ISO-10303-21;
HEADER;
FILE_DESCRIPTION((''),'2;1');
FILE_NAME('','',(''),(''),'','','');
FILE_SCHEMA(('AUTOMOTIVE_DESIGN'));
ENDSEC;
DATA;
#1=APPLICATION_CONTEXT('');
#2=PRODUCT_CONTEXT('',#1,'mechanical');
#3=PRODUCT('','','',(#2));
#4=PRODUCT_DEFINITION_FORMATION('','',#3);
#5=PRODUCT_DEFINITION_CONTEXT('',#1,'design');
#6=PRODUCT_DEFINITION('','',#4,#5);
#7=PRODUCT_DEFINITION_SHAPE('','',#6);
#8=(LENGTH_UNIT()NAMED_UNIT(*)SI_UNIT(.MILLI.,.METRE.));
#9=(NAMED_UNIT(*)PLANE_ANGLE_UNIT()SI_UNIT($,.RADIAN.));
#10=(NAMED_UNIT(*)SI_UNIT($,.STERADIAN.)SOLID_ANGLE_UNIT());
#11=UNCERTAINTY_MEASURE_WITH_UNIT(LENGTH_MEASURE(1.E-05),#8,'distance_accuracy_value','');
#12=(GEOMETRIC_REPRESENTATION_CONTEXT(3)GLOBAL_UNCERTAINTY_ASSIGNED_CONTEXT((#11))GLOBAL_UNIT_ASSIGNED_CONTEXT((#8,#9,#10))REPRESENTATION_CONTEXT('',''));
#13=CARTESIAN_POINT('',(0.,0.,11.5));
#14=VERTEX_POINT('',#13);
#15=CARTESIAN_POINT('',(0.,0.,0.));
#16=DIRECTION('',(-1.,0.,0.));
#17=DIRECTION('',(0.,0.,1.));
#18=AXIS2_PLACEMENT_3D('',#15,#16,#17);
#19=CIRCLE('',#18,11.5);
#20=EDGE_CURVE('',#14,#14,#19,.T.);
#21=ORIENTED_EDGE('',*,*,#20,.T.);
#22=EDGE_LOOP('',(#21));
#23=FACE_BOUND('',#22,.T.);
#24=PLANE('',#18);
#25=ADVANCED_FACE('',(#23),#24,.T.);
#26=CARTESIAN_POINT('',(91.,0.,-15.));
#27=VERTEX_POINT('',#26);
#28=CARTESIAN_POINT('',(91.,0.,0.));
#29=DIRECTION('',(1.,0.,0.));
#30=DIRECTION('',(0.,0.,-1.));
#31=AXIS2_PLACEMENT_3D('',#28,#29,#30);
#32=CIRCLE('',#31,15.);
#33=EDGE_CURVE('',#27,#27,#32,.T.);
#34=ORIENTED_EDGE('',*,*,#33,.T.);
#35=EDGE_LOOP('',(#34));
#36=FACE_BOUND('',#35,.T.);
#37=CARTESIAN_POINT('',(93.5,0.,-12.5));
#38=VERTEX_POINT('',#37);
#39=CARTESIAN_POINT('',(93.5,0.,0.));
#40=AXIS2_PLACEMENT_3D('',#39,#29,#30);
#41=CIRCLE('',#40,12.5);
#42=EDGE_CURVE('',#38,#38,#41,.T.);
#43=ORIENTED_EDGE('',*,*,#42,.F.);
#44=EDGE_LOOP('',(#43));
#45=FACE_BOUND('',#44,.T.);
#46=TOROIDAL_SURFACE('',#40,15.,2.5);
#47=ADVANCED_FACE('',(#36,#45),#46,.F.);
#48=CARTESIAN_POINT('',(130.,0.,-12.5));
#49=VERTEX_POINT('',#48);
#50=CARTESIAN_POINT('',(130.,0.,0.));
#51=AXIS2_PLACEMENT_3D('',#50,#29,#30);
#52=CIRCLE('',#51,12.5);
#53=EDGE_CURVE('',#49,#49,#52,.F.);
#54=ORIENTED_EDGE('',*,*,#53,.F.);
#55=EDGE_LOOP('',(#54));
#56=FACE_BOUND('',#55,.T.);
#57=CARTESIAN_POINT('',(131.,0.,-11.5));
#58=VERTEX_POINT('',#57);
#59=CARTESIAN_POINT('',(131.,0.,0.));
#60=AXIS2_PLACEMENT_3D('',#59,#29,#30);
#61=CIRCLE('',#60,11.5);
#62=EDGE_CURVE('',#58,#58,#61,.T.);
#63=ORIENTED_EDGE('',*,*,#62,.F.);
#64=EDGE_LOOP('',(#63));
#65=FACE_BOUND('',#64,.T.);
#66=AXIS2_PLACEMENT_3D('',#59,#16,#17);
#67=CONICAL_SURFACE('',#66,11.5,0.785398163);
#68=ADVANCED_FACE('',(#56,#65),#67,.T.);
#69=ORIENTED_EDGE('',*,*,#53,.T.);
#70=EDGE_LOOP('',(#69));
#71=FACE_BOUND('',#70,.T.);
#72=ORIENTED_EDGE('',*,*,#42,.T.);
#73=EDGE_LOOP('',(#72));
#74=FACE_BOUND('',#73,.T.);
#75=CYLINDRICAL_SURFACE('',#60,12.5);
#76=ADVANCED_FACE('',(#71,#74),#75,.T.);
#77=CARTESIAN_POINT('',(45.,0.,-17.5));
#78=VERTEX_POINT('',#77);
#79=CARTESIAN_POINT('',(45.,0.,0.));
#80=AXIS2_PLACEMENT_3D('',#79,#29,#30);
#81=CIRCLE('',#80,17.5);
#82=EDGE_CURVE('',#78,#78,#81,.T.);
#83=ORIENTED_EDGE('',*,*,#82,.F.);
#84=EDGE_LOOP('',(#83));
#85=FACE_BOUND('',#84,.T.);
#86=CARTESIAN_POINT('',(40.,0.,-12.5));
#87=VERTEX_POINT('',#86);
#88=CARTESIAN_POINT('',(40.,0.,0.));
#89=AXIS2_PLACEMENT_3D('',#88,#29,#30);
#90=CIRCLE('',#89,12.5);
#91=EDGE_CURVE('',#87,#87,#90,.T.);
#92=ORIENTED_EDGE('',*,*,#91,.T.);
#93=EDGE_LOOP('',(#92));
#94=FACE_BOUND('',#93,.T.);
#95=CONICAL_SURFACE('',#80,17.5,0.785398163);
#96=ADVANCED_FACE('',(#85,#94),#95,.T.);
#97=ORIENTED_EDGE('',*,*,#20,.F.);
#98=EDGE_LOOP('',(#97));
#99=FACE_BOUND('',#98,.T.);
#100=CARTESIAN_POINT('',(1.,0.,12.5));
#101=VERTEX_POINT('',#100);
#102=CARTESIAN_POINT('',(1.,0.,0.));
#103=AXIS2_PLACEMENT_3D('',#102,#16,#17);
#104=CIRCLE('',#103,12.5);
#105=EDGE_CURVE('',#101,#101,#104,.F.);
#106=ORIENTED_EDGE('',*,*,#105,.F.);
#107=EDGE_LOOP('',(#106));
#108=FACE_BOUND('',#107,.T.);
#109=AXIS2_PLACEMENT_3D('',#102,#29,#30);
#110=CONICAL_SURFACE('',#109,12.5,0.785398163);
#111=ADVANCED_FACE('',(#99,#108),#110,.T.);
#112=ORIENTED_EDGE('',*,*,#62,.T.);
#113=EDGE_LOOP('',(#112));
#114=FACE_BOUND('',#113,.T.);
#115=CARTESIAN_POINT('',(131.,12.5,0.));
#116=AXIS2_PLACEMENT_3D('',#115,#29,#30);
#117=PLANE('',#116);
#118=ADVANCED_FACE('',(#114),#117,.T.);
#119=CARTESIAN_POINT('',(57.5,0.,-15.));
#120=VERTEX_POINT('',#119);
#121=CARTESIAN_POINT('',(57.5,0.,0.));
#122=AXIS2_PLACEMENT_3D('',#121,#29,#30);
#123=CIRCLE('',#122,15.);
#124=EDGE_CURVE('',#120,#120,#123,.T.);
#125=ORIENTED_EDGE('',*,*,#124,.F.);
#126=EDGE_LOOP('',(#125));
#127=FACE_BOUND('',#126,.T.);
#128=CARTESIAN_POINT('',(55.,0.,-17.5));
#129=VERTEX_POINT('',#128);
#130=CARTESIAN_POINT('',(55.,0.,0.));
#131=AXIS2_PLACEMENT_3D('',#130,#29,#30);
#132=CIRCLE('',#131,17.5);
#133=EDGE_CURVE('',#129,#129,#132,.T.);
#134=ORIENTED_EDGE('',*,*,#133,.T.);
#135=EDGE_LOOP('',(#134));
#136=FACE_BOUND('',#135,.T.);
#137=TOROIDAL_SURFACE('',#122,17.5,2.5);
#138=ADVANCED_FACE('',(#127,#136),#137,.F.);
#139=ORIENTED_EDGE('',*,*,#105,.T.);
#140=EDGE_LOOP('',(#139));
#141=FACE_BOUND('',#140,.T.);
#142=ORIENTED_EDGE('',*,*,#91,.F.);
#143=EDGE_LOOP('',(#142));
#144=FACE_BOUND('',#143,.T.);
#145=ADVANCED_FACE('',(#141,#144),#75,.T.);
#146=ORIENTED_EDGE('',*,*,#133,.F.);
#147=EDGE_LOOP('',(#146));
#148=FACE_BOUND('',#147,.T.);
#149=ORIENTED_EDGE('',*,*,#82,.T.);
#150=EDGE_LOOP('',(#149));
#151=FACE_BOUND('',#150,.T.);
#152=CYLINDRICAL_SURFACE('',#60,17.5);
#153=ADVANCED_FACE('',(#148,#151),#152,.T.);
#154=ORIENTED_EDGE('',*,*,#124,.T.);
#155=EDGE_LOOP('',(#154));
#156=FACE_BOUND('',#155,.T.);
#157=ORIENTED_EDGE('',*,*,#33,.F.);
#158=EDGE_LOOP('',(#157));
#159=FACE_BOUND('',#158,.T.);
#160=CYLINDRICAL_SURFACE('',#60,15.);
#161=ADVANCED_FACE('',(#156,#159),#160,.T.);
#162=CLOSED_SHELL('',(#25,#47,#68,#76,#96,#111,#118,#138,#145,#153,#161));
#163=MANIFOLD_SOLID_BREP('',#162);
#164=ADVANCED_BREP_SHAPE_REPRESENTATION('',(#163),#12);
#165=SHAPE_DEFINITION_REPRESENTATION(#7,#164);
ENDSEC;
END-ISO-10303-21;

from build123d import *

# Parameters (mm, degrees)
FILLET1_R     = 2.5
CHAMFER2_SIZE = 1


with BuildPart() as part:
    # Sketch1 → Revolve1 (revolve)
    with BuildSketch(Plane.XY, mode=Mode.PRIVATE) as revolve1_sk:
        Polygon((0, 0), (0, 12.5), (40, 12.5), (45, 17.5), (55, 17.5), (55, 15), (91, 15), (91, 12.5), (131, 12.5), (131, 0), align=None)
    revolve(revolve1_sk.sketch.rotate(Axis((131, 0, 0), (-1, 0, 0)), 90), axis=Axis((131, 0, 0), (-1, 0, 0)))

    # Fillet1
    fillet1_edges = [part.edges().sort_by_distance(p)[0] for p in [
        (91, 0, 12.5),
        (55, 0, 15),
    ]]
    fillet(fillet1_edges, radius=FILLET1_R - 0.0001)  # a hair under: the kernel refuses the full size

    # Chamfer2
    chamfer2_edges = [part.edges().sort_by_distance(p)[0] for p in [
        (0, 0, 12.5),
        (131, 0, 12.5),
    ]]
    chamfer(chamfer2_edges, length=CHAMFER2_SIZE)


solid = part.part
